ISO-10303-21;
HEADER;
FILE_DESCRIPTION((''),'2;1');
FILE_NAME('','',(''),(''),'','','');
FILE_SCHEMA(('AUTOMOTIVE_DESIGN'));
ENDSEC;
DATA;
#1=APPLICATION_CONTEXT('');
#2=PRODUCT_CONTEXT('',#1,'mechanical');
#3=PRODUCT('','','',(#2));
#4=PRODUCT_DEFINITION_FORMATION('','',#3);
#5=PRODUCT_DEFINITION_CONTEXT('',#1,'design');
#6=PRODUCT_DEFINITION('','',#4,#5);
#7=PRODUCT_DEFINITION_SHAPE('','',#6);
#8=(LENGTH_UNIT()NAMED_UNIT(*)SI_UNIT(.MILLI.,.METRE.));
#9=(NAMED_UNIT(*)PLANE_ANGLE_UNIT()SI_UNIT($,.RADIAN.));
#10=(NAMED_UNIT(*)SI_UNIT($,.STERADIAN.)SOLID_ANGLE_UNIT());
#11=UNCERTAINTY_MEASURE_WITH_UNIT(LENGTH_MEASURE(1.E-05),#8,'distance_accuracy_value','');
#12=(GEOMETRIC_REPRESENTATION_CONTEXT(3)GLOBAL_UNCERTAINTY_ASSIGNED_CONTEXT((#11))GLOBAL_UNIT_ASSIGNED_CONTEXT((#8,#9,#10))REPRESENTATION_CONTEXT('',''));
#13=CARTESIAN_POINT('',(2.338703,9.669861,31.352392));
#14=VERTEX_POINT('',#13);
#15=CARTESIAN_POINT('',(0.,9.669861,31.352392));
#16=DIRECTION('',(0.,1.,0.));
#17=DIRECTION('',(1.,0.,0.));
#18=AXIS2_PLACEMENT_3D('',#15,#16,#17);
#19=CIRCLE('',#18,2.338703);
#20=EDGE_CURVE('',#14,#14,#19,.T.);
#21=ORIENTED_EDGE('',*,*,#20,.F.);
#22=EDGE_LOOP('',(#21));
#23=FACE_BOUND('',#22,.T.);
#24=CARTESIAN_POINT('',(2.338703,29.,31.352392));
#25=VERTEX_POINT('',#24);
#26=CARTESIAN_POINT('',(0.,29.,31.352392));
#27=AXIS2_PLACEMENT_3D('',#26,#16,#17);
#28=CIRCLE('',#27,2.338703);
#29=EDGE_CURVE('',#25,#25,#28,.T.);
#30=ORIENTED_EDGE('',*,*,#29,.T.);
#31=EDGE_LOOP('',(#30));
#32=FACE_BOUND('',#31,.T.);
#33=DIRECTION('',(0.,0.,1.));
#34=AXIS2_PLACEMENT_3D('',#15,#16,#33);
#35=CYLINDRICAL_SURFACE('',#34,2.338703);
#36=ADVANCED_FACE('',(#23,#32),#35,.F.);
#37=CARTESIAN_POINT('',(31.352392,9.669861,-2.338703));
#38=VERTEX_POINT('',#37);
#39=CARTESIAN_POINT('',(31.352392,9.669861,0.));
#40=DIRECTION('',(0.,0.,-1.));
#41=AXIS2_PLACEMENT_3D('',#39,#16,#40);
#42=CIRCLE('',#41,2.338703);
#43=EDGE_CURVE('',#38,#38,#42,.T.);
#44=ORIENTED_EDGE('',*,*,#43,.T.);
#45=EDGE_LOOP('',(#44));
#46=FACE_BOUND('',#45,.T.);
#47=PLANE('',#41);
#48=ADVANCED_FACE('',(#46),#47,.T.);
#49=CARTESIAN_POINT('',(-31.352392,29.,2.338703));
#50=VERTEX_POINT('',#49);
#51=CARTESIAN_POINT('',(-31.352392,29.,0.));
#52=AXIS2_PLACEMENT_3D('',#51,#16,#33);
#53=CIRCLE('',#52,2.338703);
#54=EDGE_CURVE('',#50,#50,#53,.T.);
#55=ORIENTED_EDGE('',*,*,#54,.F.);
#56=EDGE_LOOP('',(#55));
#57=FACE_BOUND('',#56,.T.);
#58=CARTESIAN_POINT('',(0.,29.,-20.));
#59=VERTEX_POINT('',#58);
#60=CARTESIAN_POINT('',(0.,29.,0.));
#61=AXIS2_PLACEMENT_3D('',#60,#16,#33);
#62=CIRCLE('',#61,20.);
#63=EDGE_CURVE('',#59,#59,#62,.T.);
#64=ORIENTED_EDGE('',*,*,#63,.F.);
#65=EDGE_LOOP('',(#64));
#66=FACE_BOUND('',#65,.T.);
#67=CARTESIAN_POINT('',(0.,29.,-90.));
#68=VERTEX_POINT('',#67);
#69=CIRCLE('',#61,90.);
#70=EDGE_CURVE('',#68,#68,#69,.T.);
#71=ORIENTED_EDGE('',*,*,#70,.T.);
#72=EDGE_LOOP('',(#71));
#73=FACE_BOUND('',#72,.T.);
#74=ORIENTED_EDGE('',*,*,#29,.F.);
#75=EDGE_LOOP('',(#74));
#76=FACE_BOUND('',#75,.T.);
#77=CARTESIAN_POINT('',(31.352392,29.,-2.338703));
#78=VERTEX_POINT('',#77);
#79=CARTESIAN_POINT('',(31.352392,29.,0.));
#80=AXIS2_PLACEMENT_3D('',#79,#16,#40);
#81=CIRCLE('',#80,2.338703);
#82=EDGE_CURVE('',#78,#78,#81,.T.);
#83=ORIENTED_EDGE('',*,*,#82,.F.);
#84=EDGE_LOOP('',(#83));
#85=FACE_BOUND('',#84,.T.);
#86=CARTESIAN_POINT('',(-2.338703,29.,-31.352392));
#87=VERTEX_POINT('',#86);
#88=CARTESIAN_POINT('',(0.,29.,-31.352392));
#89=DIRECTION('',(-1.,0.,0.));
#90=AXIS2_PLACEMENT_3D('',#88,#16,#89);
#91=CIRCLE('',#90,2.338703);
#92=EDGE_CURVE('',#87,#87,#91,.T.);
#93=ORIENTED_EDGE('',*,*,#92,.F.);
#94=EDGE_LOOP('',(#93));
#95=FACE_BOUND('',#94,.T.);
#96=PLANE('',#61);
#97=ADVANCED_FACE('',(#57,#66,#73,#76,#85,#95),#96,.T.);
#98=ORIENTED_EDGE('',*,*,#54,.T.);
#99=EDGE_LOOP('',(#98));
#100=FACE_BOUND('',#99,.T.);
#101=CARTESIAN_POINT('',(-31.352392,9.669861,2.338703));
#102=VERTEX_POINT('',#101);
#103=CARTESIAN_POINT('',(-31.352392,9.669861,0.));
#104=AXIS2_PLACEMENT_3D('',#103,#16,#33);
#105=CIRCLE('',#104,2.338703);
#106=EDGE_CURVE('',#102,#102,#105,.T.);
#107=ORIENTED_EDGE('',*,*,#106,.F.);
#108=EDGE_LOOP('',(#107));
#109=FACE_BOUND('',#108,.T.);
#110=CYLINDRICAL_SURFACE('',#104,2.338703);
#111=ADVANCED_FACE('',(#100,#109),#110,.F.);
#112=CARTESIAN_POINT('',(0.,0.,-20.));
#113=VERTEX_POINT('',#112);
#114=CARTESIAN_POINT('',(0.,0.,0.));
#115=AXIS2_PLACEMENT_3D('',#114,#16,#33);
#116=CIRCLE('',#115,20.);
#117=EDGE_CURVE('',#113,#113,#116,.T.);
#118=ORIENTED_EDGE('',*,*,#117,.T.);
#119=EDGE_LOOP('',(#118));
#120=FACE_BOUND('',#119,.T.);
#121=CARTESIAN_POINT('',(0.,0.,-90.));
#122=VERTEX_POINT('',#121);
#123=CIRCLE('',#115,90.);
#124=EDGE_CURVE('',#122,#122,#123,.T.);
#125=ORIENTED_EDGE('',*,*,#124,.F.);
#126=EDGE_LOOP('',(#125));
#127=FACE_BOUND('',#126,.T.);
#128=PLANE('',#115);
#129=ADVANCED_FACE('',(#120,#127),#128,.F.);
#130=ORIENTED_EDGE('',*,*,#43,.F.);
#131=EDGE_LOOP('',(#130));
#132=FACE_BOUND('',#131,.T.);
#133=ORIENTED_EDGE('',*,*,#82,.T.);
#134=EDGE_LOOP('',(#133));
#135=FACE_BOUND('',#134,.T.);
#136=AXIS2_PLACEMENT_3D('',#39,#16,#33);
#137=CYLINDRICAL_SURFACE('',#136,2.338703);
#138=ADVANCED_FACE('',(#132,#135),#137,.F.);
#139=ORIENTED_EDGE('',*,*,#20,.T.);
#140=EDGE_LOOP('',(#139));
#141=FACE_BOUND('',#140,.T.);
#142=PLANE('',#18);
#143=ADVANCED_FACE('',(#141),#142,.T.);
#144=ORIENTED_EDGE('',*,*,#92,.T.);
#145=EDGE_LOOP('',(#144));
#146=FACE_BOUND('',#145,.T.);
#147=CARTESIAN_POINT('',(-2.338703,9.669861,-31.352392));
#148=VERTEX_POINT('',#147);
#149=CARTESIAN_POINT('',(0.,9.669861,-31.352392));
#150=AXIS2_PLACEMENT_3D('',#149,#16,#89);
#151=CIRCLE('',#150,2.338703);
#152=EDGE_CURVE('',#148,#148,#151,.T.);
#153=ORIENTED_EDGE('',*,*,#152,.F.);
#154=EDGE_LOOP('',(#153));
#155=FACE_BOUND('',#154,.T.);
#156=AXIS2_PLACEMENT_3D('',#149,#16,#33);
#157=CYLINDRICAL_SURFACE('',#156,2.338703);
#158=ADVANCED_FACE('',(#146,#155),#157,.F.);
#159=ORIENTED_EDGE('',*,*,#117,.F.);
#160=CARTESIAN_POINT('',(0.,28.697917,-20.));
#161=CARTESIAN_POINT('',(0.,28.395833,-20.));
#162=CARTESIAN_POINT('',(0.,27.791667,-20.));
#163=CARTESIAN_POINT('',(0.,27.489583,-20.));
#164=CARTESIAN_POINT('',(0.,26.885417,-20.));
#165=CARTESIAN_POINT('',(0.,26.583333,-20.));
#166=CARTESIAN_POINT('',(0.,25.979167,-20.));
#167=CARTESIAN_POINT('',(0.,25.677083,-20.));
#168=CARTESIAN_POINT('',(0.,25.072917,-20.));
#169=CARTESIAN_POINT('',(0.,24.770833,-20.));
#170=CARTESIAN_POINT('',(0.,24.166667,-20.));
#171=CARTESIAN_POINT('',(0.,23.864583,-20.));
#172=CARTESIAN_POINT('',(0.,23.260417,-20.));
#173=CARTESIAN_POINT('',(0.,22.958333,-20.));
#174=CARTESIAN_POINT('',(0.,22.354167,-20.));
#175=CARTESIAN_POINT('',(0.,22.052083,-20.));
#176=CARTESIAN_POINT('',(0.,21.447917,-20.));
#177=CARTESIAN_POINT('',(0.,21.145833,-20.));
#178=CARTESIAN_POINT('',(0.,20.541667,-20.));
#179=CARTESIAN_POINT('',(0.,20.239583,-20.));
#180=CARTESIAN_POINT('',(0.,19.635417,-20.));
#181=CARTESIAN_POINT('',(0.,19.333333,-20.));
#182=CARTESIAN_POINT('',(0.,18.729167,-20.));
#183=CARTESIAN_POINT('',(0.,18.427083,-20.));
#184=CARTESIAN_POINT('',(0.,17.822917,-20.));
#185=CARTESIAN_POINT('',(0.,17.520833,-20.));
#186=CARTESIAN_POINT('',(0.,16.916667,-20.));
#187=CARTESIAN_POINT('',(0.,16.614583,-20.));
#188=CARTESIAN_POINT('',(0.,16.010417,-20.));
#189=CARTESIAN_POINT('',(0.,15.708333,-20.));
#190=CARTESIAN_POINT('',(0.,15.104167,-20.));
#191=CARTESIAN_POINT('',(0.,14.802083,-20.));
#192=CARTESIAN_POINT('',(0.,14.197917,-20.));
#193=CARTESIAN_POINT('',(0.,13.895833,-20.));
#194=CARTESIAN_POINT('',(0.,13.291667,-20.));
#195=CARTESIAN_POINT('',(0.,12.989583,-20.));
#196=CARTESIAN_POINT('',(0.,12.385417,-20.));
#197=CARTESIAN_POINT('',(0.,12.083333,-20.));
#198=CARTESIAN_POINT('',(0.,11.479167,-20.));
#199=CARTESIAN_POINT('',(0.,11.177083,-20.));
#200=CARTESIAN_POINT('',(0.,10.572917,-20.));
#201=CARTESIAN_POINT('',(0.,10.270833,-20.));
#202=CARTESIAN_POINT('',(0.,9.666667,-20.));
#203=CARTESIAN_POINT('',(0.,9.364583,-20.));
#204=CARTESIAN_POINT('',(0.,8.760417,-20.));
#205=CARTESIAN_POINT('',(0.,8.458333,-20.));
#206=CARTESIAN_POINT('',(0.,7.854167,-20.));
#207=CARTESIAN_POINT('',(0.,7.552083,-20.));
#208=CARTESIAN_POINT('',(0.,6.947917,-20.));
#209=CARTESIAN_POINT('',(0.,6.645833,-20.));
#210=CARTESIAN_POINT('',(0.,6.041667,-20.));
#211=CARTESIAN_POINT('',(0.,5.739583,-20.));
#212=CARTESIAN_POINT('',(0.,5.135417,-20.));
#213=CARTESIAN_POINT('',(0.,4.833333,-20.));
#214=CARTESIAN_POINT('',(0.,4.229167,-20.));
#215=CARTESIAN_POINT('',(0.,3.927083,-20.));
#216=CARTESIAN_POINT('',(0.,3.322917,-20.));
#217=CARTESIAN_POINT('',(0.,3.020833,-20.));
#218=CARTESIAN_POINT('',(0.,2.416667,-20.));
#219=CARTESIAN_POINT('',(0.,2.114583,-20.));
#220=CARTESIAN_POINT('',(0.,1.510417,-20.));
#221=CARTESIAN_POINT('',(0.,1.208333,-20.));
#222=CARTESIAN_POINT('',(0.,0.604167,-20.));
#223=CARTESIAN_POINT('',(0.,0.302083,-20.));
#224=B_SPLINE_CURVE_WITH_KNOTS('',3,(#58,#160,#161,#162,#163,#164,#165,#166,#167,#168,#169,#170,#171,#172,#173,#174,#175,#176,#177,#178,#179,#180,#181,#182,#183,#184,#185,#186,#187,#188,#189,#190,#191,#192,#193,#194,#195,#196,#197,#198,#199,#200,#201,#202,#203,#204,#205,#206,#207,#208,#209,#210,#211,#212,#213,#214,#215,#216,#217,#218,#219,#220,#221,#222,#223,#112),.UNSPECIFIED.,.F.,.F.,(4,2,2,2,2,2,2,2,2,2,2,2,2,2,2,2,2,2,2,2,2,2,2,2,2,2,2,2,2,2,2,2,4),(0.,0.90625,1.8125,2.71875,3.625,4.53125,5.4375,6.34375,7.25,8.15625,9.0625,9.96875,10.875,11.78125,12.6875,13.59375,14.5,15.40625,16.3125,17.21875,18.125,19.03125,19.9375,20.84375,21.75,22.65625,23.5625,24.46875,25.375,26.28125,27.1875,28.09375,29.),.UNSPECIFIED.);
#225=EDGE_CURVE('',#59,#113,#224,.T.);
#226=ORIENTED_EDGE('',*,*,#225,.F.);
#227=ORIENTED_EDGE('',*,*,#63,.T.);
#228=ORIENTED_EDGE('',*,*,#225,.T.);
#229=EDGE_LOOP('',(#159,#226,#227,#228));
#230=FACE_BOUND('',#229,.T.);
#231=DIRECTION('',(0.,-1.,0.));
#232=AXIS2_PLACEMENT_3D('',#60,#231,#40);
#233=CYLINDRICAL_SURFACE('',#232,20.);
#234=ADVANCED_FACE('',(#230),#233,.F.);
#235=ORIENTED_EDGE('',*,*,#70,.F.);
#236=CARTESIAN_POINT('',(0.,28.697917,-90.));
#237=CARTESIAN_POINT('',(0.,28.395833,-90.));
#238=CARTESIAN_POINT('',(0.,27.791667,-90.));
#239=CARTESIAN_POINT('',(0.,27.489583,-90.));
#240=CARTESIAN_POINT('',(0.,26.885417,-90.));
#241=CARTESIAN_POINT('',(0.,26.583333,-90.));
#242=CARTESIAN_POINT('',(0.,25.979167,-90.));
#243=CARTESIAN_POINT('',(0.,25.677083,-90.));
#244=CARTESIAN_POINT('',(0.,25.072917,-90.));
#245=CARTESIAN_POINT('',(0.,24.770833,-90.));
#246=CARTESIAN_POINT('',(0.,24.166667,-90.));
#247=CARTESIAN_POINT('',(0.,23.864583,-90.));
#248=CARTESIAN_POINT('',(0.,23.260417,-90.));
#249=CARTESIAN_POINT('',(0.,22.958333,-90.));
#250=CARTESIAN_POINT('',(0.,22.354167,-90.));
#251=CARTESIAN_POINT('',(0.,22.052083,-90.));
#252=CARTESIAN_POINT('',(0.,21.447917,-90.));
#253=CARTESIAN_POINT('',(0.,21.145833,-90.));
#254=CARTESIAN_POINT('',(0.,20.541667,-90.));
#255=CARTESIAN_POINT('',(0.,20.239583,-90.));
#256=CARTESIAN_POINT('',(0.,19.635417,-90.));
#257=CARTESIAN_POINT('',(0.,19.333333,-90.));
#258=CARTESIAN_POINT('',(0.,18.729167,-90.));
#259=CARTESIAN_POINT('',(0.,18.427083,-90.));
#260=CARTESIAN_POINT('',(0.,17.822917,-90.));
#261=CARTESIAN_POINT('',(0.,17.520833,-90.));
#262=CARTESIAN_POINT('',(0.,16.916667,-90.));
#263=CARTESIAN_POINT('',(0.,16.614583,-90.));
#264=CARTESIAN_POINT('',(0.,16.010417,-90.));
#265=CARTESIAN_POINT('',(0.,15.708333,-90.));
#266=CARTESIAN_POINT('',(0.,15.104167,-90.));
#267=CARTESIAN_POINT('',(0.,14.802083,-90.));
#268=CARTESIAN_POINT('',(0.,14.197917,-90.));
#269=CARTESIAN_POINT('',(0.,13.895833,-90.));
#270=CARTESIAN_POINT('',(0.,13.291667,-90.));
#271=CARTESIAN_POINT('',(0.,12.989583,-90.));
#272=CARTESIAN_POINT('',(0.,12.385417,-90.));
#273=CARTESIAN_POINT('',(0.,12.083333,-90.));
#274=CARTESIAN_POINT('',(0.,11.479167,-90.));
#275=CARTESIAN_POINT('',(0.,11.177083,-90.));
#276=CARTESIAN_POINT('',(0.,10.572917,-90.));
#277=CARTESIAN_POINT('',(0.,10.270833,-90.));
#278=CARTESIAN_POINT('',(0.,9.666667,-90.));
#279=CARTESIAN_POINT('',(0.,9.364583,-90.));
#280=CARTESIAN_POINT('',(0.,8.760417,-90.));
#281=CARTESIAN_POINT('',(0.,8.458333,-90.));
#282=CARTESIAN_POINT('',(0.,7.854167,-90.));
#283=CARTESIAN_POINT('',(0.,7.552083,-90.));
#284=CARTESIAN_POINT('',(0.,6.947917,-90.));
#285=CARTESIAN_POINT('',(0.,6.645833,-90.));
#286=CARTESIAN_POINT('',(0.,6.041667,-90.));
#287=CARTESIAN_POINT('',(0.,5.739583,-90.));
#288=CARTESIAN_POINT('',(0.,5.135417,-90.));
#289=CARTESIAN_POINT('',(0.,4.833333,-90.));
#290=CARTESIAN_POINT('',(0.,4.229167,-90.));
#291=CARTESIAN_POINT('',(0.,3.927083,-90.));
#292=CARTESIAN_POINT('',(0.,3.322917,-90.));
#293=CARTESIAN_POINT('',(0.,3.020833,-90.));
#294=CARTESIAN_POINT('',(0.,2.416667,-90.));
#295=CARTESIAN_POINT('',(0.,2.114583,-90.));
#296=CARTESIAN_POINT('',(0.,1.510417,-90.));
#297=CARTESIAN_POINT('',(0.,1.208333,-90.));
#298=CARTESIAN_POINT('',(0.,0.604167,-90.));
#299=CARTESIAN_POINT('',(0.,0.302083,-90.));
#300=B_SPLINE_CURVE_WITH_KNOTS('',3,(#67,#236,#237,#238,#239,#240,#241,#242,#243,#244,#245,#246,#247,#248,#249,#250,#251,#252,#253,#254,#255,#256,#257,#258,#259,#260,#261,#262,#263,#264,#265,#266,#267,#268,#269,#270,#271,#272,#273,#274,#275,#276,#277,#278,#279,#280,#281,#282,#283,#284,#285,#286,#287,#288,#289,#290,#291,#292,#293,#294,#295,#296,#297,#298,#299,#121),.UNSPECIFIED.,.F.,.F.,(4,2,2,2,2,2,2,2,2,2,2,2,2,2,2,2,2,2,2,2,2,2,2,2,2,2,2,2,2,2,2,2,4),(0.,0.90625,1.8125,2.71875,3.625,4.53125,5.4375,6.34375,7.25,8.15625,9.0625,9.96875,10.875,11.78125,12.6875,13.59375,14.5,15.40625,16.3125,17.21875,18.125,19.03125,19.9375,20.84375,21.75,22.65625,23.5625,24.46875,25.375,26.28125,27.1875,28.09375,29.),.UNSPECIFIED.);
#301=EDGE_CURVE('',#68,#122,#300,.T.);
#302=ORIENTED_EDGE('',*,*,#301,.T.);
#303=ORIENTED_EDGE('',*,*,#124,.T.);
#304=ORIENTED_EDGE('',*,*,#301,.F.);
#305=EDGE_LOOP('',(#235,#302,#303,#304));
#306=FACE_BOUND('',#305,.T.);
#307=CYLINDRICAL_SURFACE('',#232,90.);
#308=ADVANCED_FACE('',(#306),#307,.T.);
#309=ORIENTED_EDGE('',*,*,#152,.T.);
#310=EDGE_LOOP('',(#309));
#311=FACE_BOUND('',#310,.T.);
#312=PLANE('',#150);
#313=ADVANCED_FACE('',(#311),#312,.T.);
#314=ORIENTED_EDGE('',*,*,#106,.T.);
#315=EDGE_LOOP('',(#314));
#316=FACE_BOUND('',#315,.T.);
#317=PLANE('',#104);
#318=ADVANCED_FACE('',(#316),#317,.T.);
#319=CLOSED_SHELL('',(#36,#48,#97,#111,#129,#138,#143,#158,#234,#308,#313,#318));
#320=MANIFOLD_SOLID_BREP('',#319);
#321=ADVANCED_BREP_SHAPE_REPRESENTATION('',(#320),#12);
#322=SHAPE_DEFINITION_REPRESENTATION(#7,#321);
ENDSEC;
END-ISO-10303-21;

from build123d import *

# Parameters (mm, degrees)
SKETCH1_R           = 90
BOSS_EXTRUDE1_DEPTH = 29
SKETCH2_R           = 20
CUT_EXTRUDE1_DEPTH  = 131.541181242
SKETCH3_R           = 2.338703077
CUT_EXTRUDE2_DEPTH  = 19.330138655
CIRPATTERN1_COUNT   = 4


with BuildPart() as part:
    # Sketch1 → Boss-Extrude1 (new body)
    with BuildSketch(Plane(origin=(0, 0, 0), x_dir=(1, 0, 0), z_dir=(0, 1, 0))):
        Circle(SKETCH1_R)
    extrude(amount=BOSS_EXTRUDE1_DEPTH)

    # Sketch2 → Cut-Extrude1 (cut, through all)
    with BuildSketch(Plane(origin=(0, 0, 0), x_dir=(1, 0, 0), z_dir=(0, 1, 0))):
        Circle(SKETCH2_R)
    extrude(amount=CUT_EXTRUDE1_DEPTH, mode=Mode.SUBTRACT)

    # Sketch3 → Cut-Extrude2 (cut)
    with BuildSketch(Plane(origin=(0, 29, 0), x_dir=(1, 0, 0), z_dir=(0, 1, 0))):
        with Locations((-31.352392249, 0)):
            Circle(SKETCH3_R)
    cut_extrude2 = extrude(amount=-CUT_EXTRUDE2_DEPTH, mode=Mode.SUBTRACT)

    # CirPattern1: Cut-Extrude2 ×4 about axis
    cirpattern1_axis = Axis((0, 0, 0), (0, 1, 0))
    for i in range(1, CIRPATTERN1_COUNT):
        add(cut_extrude2.rotate(cirpattern1_axis, i * 360 / CIRPATTERN1_COUNT), mode=Mode.SUBTRACT)


solid = part.part
